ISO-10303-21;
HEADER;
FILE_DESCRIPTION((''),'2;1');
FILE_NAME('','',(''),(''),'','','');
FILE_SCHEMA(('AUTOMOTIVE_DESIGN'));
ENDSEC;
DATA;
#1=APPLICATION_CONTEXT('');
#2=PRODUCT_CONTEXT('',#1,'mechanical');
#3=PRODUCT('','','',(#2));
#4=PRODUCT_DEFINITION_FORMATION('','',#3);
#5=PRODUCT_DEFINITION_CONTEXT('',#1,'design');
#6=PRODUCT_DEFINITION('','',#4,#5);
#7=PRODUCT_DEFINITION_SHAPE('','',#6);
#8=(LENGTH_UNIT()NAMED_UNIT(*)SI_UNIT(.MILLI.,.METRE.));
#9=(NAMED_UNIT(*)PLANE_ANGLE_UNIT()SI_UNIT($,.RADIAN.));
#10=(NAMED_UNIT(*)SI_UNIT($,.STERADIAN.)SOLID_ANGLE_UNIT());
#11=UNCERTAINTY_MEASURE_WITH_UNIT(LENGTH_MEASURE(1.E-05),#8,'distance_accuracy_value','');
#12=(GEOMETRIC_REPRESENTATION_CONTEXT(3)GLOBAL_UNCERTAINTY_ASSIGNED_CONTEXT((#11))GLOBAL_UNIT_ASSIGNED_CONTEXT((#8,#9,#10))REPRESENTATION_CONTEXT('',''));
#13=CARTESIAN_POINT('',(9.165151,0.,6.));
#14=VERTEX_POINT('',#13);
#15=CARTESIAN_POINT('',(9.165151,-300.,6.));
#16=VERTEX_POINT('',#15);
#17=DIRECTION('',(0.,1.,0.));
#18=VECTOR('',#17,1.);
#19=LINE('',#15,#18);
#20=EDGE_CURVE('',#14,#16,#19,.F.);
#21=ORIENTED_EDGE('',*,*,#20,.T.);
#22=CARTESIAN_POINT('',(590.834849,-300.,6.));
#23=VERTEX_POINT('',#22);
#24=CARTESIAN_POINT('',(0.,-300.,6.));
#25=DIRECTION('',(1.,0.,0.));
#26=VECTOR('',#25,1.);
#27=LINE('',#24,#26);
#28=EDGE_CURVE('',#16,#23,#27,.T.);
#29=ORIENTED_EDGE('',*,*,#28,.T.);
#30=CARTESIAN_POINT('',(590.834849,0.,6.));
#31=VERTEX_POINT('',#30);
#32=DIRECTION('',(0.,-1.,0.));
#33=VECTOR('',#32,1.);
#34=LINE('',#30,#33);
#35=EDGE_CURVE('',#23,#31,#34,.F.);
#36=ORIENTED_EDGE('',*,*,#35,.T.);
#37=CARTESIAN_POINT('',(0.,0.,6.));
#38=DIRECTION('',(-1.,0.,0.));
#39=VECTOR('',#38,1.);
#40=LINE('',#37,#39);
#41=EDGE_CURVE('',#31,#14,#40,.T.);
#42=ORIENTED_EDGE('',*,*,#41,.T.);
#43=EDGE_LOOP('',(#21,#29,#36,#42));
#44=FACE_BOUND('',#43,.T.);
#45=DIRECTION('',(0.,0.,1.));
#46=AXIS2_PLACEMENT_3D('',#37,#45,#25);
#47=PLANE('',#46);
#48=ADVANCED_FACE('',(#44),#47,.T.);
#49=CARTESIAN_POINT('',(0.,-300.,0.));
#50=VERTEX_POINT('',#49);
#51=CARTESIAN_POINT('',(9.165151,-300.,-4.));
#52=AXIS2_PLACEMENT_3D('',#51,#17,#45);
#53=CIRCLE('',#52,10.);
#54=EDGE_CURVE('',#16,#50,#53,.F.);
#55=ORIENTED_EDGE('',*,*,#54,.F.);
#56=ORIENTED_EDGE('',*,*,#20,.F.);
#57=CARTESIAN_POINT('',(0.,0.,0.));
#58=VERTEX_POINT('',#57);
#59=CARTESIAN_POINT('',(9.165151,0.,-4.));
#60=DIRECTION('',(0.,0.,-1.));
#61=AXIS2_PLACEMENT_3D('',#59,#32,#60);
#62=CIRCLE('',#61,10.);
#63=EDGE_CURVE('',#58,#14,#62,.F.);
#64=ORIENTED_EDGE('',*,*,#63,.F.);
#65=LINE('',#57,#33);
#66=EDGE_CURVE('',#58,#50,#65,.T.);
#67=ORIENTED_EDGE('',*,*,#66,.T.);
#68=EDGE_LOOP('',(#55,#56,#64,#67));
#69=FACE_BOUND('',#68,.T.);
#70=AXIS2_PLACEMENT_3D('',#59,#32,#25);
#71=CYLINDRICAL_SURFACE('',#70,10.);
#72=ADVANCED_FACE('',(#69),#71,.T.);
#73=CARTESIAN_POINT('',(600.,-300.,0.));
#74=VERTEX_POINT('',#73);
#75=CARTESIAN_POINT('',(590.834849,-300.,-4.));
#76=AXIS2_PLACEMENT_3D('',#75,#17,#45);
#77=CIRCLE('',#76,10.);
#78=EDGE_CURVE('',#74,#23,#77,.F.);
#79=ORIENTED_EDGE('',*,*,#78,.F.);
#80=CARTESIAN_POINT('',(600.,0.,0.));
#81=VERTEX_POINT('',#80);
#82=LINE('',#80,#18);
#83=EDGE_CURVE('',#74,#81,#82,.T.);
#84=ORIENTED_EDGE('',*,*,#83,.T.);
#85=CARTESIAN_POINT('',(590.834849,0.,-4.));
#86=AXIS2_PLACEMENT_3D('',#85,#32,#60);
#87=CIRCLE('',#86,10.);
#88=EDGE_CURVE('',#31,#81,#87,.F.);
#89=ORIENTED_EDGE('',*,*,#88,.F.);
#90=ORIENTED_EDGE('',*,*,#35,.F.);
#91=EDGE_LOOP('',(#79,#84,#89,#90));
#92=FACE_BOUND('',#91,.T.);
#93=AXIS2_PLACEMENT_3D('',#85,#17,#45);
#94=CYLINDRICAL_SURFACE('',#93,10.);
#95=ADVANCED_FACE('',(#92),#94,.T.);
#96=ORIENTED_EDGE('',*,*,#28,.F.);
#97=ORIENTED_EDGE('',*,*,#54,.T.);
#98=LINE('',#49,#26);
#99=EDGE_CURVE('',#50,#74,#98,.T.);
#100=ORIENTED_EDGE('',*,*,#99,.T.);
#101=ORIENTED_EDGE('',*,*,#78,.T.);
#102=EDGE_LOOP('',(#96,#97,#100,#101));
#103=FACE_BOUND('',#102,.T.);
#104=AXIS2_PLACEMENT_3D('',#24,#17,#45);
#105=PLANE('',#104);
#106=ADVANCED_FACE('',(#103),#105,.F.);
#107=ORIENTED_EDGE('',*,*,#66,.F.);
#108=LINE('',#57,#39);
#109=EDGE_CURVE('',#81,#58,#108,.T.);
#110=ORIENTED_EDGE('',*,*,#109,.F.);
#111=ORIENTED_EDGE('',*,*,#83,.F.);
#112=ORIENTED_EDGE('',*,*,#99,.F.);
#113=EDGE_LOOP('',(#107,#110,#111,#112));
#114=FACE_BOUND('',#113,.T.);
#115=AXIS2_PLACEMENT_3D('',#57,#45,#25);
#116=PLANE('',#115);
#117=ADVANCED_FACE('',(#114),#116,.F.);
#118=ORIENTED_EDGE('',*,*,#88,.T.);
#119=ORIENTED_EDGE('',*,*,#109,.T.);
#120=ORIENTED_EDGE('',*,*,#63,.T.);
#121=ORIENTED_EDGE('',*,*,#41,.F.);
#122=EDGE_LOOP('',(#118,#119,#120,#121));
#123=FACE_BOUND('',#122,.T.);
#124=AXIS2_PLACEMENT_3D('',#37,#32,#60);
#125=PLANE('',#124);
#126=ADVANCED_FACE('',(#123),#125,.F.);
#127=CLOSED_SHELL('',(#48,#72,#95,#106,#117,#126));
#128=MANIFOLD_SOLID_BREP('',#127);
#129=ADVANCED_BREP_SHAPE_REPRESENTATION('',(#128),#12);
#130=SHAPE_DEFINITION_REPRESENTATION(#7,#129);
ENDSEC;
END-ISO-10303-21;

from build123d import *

# Parameters (mm, degrees)
ESBO_O1_W                = 600
ESBO_O1_H                = 300
RESSALTO_EXTRUS_O2_DEPTH = 6
FILETE1_R                = 10
FILETE2_R                = 10


with BuildPart() as part:
    # Esboço1 → Ressalto-extrusão2 (new body)
    with BuildSketch(Plane.XY):
        with Locations((300, -150)):
            Rectangle(ESBO_O1_W, ESBO_O1_H)
    extrude(amount=RESSALTO_EXTRUS_O2_DEPTH)

    # Filete1
    # the kernel refuses this fillet: 10 mm, written as the material it takes off along each edge
    with BuildSketch(Plane(origin=(600, 22.912878475, 6), x_dir=(0, 0, -1), z_dir=(0, -1, 0))) as filete1_piece_1:
        with BuildLine():
            CenterArc((10, -9.16515139), FILETE1_R, 113.578178478, 66.421821522)
            Line((0, -9.16515139), (-0.2, -9.16515139))
            Line((-0.2, -9.16515139), (-0.2, 0))
            Line((-0.2, 0), (0, 0.2))
            ThreePointArc((0, 0.2), (3, 0.2), (5.92, 0.183303028))
            Line((5.92, 0.183303028), (6, 0))
        make_face()
    extrude(amount=345.82575695, mode=Mode.SUBTRACT)

    # Filete2
    # the kernel refuses this fillet: 10 mm, written as the material it takes off along each edge
    with BuildSketch(Plane(origin=(0, -322.912878475, 6), x_dir=(1, 0, 0), z_dir=(0, 1, 0))) as filete2_piece_1:
        with BuildLine():
            CenterArc((9.16515139, 10), FILETE2_R, 203.578178478, 66.421821522)
            Line((0, 6), (-0.183303028, 5.92))
            ThreePointArc((-0.183303028, 5.92), (-0.2, 3), (-0.2, 0))
            Line((-0.2, 0), (0, -0.2))
            Line((0, -0.2), (9.16515139, -0.2))
            Line((9.16515139, -0.2), (9.16515139, 0))
        make_face()
    extrude(amount=345.82575695, mode=Mode.SUBTRACT)


solid = part.part
